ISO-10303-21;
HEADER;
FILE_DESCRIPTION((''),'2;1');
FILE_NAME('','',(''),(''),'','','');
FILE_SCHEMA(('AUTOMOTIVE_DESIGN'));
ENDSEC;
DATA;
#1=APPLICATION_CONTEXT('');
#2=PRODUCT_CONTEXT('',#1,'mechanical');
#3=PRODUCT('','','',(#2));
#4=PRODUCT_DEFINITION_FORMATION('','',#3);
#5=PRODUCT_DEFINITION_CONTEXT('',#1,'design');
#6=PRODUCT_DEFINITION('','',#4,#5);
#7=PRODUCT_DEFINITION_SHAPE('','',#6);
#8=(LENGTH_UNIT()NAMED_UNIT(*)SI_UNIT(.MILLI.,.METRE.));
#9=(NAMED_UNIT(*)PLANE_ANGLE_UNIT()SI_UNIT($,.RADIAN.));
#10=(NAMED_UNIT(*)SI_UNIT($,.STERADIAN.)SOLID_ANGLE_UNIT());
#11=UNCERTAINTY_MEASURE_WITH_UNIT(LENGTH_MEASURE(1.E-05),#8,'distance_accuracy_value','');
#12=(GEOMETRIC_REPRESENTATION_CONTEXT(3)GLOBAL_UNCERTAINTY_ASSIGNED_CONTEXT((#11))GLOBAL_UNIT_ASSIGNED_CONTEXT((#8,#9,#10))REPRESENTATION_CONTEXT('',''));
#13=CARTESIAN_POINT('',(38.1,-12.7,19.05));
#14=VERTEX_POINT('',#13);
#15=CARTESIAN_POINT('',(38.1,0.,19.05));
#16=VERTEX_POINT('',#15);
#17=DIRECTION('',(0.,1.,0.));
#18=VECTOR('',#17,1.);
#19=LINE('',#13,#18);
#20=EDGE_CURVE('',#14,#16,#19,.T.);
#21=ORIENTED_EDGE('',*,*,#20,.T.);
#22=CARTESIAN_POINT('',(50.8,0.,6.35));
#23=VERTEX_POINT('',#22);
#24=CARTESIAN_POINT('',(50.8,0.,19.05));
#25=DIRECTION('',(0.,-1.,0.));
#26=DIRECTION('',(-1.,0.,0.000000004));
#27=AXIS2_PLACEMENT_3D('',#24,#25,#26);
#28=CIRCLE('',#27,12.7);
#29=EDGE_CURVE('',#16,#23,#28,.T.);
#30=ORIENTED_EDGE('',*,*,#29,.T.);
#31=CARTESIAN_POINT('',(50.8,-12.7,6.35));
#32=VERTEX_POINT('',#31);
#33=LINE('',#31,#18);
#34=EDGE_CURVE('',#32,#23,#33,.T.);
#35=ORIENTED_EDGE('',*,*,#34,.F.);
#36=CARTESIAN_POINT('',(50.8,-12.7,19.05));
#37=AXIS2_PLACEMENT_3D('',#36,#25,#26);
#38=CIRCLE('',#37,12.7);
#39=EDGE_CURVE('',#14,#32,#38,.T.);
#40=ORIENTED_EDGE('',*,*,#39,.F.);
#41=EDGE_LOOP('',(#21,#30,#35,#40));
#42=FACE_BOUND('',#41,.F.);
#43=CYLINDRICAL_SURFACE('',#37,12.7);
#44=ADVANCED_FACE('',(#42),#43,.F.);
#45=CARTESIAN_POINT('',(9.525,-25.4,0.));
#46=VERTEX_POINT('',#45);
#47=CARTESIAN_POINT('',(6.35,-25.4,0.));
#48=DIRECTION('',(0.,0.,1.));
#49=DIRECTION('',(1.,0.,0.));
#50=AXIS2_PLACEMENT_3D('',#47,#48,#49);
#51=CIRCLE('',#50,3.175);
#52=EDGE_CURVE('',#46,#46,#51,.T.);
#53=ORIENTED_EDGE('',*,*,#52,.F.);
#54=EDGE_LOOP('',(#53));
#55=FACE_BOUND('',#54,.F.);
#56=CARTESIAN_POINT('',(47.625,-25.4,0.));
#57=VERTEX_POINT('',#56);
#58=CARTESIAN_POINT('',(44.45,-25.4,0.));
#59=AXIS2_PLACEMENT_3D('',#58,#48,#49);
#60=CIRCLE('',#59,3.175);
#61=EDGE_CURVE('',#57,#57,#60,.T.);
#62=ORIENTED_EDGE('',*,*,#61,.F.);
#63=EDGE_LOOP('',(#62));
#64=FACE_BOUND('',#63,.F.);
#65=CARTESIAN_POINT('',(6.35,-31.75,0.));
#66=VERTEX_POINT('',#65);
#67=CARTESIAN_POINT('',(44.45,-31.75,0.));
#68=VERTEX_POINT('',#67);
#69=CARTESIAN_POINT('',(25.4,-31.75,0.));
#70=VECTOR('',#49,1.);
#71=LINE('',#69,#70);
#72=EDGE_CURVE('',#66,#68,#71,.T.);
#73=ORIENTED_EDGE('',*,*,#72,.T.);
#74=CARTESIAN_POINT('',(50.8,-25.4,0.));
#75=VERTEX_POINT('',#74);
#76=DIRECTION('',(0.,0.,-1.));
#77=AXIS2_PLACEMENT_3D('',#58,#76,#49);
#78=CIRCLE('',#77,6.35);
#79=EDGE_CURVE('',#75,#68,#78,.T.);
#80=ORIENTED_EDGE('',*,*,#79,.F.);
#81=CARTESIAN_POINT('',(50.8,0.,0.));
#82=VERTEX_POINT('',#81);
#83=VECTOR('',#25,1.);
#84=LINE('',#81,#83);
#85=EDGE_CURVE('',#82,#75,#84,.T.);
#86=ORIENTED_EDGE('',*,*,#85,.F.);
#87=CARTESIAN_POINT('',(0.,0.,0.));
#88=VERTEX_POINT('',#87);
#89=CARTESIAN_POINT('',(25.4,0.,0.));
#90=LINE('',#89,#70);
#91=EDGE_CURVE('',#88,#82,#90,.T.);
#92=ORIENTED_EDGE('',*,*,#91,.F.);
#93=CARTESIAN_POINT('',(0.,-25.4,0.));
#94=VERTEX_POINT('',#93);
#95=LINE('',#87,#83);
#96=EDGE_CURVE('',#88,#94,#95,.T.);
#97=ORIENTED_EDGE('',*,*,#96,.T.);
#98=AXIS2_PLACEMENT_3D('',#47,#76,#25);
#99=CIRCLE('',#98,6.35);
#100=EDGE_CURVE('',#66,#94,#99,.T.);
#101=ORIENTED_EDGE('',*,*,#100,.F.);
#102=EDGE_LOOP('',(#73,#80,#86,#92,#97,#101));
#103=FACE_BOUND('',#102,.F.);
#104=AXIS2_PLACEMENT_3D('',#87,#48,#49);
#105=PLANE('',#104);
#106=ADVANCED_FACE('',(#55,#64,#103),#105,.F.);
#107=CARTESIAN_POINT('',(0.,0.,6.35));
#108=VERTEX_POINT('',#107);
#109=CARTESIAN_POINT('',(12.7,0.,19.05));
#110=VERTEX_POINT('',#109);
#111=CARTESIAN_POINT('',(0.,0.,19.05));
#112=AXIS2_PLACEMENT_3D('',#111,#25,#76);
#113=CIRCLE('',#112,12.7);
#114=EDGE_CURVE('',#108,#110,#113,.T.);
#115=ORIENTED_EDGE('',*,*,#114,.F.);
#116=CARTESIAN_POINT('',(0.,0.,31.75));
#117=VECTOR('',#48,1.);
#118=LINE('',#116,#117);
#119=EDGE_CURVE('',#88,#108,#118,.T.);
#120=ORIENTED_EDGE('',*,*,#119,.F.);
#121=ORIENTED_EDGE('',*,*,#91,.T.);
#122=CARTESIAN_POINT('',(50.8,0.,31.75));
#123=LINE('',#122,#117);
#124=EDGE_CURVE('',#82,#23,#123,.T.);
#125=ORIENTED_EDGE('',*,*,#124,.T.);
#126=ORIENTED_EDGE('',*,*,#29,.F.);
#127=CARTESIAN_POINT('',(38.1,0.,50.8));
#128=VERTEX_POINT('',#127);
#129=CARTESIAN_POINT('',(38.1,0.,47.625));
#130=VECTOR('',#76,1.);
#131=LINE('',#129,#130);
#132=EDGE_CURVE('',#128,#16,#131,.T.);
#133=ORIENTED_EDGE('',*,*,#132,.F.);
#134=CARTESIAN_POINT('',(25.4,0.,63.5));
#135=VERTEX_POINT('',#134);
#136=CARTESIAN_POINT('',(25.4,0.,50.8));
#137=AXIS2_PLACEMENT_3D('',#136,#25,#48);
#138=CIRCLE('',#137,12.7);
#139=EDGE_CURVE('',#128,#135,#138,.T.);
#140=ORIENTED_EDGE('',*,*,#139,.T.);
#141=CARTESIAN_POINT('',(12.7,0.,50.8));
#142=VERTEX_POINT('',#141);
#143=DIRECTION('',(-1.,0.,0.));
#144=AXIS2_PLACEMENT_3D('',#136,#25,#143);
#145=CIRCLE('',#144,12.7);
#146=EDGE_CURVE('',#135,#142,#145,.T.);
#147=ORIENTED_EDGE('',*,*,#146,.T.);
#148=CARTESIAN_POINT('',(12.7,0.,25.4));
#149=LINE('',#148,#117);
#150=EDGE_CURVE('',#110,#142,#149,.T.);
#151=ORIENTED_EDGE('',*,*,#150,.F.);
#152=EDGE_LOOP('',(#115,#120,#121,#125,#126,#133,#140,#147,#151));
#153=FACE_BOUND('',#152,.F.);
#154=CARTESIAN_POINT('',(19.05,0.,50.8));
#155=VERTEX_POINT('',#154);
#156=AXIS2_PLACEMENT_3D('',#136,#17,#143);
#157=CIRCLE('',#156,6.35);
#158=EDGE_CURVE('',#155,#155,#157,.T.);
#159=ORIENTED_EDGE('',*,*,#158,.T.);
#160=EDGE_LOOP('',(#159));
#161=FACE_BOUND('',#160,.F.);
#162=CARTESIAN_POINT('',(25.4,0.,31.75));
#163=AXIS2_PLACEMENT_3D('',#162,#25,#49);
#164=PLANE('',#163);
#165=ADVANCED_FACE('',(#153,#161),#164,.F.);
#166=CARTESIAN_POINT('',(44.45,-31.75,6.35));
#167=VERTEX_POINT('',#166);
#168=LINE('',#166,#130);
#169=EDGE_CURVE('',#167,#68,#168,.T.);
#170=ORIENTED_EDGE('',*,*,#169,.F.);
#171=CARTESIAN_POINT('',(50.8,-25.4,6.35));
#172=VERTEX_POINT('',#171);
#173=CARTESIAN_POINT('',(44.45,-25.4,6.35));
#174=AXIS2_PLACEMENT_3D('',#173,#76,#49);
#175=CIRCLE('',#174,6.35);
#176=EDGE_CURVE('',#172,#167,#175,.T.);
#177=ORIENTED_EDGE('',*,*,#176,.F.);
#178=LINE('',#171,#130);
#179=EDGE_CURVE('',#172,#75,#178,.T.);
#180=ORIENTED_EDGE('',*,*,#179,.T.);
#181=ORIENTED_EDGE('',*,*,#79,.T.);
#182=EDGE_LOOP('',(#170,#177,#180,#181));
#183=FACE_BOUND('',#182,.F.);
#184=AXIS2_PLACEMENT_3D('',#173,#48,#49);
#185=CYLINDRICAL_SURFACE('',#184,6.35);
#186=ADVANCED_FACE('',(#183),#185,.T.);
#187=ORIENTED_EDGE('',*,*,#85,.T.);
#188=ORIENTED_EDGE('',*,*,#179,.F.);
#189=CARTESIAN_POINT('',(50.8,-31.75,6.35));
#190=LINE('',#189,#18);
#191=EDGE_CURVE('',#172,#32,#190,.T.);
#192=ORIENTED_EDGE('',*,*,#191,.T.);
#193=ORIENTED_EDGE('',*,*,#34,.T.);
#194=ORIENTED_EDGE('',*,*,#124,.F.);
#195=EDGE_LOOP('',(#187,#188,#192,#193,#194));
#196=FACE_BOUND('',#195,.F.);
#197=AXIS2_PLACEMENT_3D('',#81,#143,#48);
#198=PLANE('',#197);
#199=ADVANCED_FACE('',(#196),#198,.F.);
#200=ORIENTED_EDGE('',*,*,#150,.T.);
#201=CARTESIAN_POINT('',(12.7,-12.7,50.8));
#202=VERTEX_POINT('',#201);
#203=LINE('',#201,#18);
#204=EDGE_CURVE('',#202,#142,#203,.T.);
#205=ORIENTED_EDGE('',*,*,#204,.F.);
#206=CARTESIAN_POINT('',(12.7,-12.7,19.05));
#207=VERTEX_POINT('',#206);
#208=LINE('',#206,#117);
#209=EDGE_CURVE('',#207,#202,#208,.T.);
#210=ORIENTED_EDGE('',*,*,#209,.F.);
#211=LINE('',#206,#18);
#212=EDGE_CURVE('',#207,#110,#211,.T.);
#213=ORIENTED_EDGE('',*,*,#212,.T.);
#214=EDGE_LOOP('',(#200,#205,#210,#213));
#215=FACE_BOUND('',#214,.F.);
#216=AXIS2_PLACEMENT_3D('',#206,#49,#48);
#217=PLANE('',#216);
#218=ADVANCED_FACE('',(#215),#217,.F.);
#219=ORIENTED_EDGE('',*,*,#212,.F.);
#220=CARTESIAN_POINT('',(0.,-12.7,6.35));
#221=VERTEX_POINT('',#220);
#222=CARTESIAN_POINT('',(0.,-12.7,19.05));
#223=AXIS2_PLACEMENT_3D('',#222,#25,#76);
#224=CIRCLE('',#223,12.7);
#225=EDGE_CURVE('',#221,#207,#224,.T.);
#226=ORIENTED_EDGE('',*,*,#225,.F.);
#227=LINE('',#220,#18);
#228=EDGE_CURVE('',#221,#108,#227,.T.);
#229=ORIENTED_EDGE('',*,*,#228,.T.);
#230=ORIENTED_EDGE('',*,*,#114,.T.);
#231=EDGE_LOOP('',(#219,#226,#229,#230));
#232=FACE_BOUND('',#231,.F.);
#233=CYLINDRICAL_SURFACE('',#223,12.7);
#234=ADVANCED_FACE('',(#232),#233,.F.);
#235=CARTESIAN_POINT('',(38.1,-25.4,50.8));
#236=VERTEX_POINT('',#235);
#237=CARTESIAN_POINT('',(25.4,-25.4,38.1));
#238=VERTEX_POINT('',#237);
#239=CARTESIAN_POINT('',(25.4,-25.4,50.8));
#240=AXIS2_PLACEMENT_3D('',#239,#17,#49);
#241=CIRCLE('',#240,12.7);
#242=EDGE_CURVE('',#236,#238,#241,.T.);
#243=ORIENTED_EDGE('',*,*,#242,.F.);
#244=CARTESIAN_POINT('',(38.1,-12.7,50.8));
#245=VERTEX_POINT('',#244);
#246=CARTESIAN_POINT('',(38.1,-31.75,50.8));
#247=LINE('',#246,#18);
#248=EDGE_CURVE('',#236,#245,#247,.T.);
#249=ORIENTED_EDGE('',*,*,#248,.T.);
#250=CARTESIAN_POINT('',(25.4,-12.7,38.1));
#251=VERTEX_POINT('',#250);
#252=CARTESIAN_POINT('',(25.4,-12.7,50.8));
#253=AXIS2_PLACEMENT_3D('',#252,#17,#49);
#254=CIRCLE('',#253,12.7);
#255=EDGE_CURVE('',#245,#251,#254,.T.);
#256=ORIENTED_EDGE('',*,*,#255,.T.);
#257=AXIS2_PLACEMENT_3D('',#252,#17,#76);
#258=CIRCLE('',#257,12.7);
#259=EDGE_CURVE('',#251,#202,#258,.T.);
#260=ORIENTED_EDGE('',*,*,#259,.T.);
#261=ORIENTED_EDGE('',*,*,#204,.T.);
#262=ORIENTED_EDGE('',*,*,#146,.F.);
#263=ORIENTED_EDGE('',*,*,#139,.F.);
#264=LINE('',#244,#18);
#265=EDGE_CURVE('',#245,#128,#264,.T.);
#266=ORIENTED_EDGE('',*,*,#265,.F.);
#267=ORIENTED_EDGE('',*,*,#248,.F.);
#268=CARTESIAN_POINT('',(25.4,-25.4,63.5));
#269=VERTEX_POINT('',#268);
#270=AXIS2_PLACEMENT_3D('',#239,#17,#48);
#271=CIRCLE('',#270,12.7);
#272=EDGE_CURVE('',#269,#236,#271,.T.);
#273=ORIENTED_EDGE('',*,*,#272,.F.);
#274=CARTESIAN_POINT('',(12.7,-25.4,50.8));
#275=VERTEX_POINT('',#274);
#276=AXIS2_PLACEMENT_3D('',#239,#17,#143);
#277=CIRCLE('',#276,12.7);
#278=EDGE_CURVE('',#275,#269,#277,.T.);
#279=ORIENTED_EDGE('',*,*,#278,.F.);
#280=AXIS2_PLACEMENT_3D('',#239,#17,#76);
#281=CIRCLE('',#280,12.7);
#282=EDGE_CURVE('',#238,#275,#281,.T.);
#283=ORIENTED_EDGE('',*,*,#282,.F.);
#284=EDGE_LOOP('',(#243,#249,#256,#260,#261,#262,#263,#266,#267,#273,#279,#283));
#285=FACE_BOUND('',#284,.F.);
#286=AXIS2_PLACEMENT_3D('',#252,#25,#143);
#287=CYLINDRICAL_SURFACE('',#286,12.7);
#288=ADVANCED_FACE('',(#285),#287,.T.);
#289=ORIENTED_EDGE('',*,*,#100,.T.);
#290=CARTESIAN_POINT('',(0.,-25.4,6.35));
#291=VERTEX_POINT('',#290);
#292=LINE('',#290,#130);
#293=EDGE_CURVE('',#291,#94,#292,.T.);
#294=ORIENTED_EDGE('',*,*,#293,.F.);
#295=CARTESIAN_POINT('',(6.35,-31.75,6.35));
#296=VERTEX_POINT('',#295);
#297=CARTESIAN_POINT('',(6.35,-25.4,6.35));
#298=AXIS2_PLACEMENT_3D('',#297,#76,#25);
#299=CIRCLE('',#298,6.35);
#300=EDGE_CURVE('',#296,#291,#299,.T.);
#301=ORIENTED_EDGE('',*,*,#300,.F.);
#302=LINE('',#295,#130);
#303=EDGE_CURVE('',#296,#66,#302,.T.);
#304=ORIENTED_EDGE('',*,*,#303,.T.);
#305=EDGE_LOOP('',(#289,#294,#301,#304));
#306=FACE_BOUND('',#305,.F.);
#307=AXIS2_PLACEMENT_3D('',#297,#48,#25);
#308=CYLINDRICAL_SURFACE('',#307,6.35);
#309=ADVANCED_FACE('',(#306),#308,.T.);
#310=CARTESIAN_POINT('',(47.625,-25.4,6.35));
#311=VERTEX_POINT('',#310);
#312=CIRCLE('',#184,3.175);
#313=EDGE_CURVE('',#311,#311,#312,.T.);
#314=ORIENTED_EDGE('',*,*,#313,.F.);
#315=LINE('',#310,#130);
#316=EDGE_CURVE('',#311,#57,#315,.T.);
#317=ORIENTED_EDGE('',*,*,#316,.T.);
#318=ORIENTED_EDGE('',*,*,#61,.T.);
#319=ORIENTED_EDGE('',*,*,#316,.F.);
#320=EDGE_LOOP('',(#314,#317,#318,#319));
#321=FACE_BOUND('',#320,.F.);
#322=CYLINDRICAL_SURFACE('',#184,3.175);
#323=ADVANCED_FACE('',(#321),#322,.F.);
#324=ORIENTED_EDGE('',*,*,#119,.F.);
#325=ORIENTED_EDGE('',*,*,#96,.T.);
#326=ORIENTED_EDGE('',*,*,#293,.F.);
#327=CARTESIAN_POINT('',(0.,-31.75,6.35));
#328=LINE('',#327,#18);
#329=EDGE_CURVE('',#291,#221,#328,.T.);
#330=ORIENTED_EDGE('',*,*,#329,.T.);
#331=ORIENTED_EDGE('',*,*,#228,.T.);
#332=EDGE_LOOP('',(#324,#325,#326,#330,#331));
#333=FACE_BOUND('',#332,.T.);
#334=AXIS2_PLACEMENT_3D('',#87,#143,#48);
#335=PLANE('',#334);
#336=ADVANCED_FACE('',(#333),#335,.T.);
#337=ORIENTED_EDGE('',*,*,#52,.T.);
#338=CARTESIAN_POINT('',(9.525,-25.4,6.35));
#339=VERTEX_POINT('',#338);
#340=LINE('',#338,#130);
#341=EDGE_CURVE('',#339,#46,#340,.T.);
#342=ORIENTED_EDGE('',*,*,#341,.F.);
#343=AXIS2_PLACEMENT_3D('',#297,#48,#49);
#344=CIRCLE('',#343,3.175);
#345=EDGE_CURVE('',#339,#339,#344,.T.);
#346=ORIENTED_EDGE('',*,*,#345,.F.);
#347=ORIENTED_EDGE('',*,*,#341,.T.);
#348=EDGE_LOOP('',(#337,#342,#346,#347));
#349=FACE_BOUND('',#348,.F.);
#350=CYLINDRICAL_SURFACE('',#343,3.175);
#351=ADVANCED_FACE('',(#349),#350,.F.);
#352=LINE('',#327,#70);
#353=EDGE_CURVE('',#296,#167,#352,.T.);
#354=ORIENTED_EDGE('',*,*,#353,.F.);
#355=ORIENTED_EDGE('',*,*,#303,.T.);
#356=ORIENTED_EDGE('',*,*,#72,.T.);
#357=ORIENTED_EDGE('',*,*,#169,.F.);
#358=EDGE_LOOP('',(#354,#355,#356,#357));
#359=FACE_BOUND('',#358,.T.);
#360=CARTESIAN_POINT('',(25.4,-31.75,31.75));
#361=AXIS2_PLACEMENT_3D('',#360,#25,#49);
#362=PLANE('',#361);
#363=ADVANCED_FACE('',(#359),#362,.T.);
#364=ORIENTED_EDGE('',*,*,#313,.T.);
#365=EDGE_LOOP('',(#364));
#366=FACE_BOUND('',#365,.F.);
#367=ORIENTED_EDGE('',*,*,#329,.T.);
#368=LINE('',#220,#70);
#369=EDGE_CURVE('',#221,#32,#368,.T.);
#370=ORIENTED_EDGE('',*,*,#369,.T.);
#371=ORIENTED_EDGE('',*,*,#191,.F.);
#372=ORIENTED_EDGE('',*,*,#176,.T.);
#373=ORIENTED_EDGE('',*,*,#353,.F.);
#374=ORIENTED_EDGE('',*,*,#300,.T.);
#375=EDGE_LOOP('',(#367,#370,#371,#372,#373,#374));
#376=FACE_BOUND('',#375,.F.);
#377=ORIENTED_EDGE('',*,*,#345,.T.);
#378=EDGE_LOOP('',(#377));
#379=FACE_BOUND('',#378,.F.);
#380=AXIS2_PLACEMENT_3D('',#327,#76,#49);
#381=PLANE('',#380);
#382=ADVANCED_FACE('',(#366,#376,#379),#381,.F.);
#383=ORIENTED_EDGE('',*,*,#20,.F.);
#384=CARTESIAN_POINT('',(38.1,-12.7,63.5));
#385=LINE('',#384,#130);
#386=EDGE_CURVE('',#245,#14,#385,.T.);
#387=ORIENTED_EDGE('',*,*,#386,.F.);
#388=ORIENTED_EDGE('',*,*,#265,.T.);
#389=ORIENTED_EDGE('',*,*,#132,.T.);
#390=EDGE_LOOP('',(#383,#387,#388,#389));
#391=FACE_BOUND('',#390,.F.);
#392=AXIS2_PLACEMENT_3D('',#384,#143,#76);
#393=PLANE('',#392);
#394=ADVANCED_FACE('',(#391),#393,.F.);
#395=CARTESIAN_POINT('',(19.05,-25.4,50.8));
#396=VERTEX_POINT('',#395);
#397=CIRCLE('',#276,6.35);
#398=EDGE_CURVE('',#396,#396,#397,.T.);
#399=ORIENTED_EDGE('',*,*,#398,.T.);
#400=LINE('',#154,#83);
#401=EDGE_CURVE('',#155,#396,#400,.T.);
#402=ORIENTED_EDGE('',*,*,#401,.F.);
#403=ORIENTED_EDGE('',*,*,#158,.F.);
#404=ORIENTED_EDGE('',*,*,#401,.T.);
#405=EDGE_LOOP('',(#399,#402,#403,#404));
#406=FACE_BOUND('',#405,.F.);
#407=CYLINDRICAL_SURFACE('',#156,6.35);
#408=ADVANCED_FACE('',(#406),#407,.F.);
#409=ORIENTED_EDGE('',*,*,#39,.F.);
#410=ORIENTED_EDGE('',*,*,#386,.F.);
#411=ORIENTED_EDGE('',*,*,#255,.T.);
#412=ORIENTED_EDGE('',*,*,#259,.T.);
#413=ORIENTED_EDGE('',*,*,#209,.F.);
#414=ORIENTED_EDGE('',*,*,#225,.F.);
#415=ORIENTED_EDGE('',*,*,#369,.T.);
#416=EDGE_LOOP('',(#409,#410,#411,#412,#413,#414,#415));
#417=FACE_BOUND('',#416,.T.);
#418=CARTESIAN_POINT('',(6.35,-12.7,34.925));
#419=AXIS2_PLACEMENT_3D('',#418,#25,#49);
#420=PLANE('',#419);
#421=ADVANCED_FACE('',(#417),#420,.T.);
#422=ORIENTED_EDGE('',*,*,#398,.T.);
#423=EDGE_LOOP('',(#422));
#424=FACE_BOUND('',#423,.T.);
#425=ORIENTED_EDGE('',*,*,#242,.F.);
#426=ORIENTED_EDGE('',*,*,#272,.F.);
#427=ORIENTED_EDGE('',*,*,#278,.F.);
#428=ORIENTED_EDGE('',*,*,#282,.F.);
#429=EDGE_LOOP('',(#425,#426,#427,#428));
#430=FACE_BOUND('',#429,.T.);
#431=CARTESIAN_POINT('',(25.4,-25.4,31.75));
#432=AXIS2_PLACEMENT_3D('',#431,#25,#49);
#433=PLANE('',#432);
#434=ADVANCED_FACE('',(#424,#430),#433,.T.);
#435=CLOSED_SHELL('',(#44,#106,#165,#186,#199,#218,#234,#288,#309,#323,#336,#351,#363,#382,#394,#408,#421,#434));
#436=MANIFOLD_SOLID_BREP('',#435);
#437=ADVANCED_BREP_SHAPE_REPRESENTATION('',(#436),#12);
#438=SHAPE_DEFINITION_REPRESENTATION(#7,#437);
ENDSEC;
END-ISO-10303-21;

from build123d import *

# Parameters (mm, degrees)
F0_W      = 50.8
F0_H      = 63.5
F1_DEPTH  = 31.75
F2_W      = 25.4
F2_H      = 31.75
F3_DEPTH  = 19.05
F5_DEPTH  = 19.05
F6_DEPTH  = 6.35
F8_DEPTH  = 25.4
F9_DEPTH  = 25.4
F11_DEPTH = 6.35
F12_R     = 3.175
F13_DEPTH = 6.35
F14_R     = 6.35
F15_DEPTH = 25.4


# Not quite as in the source:
# - a feature names something its author has since deleted; it is built from what else it names


with BuildPart() as f1:
    # F0 (on Front) → F1 (new body)
    with BuildSketch(Plane.XZ):
        with Locations((25.4, 31.75)):
            Rectangle(F0_W, F0_H)
    extrude(amount=F1_DEPTH)

    # F2 (on face) → F3 (cut)
    with BuildSketch(Plane.XZ.offset(31.75)):
        Polygon((0, 63.5), (0, 6.35), (12.7, 6.35), (12.7, 38.1), (12.7, 63.5), align=None)
        with Locations((25.4, 22.225)):
            Rectangle(F2_W, F2_H)
        Polygon((38.1, 38.1), (38.1, 6.35), (50.8, 6.35), (50.8, 63.5), (38.1, 63.5), align=None)
    extrude(amount=-F3_DEPTH, mode=Mode.SUBTRACT)

    # F4 (on face) → F5 (cut)
    with BuildSketch(Plane.XZ.offset(31.75)):
        with BuildLine():
            ThreePointArc((12.7, 50.8), (16.4197438789, 59.7802561211), (25.4, 63.5))
            Line((25.4, 63.5), (12.7, 63.5))
            Line((12.7, 63.5), (12.7, 50.8))
        make_face()
        with BuildLine():
            ThreePointArc((25.4, 63.5), (34.3802561211, 59.7802561211), (38.1, 50.8))
            Line((38.1, 50.8), (38.1, 63.5))
            Line((38.1, 63.5), (25.4, 63.5))
        make_face()
        with BuildLine():
            Line((12.7, 38.1), (25.4, 38.1))
            ThreePointArc((25.4, 38.1), (16.4197438789, 41.8197438789), (12.7, 50.8))
            Line((12.7, 50.8), (12.7, 38.1))
        make_face()
        with BuildLine():
            Line((38.1, 38.1), (38.1, 50.8))
            ThreePointArc((38.1, 50.8), (34.3802561211, 41.8197438789), (25.4, 38.1))
            Line((25.4, 38.1), (38.1, 38.1))
        make_face()
    extrude(amount=-F5_DEPTH, mode=Mode.SUBTRACT)

    # F6 (cut): a face of the model
    f6_faces = [f1.faces().sort_by_distance(p)[0] for p in [
        (25.4, -31.75, 50.8),
    ]]
    extrude(f6_faces, amount=-F6_DEPTH, mode=Mode.SUBTRACT)

    # F7 (on face) → F8 (cut)
    with BuildSketch(Plane.XZ.offset(12.7)):
        with BuildLine():
            ThreePointArc((0, 6.35), (8.9802561211, 10.0697438789), (12.7, 19.05))
            ThreePointArc((12.7, 19.05), (8.9802561211, 28.0302561211), (0, 31.75))
            Line((0, 31.75), (0, 6.35))
        make_face()
        with BuildLine():
            Line((12.7, 50.8), (12.7, 63.5))
            Line((12.7, 63.5), (0, 63.5))
            Line((0, 63.5), (0, 31.75))
            ThreePointArc((0, 31.75), (8.9802561211, 28.0302561211), (12.7, 19.05))
            Line((12.7, 19.05), (12.7, 50.8))
        make_face()
        with BuildLine():
            Line((50.8, 63.5), (38.1, 63.5))
            Line((38.1, 63.5), (38.1, 50.8))
            Line((38.1, 50.8), (38.1, 19.0500000487))
            ThreePointArc((38.1, 19.0500000487), (41.8197438961, 28.0302561383), (50.8, 31.75))
            Line((50.8, 31.75), (50.8, 63.5))
        make_face()
        with BuildLine():
            ThreePointArc((50.8, 31.75), (41.8197438961, 28.0302561383), (38.1, 19.0500000487))
            ThreePointArc((38.1, 19.0500000487), (41.8197438617, 10.0697438961), (50.8, 6.35))
            Line((50.8, 6.35), (50.8, 31.75))
        make_face()
    extrude(amount=-F8_DEPTH, mode=Mode.SUBTRACT)

    # F9 (cut): faces of the model
    f9_faces = [f1.faces().sort_by_distance(p)[0] for p in [
        (15.5367728246, -12.7, 60.6632271754),
        (35.2632271754, -12.7, 60.6632271754),
    ]]
    extrude(f9_faces, amount=-F9_DEPTH, mode=Mode.SUBTRACT)

    # F10 (on face) → F11 (cut)
    with BuildSketch(Plane.XY.offset(6.35)):
        with BuildLine():
            Line((0, -31.75), (6.35, -31.75))
            ThreePointArc((6.35, -31.75), (1.8598719395, -29.8901280605), (0, -25.4))
            Line((0, -25.4), (0, -31.75))
        make_face()
        with BuildLine():
            Line((50.8, -31.75), (50.8, -25.4))
            ThreePointArc((50.8, -25.4), (48.9401280605, -29.8901280605), (44.45, -31.75))
            Line((44.45, -31.75), (50.8, -31.75))
        make_face()
    extrude(amount=-F11_DEPTH, mode=Mode.SUBTRACT)

    # F12 (on face) → F13 (cut)
    with BuildSketch(Plane.XY.offset(6.35)):
        with Locations((6.35, -25.4)):
            Circle(F12_R)
        with Locations((44.45, -25.4)):
            Circle(F12_R)
    extrude(amount=-F13_DEPTH, mode=Mode.SUBTRACT)

    # F14 (on face) → F15 (cut)
    with BuildSketch(Plane(origin=(0, 0, 0), x_dir=(-1, 0, 0), z_dir=(0, 1, 0))):
        with Locations((-25.4, 50.8)):
            Circle(F14_R)
    extrude(amount=-F15_DEPTH, mode=Mode.SUBTRACT)


solid = f1.part
